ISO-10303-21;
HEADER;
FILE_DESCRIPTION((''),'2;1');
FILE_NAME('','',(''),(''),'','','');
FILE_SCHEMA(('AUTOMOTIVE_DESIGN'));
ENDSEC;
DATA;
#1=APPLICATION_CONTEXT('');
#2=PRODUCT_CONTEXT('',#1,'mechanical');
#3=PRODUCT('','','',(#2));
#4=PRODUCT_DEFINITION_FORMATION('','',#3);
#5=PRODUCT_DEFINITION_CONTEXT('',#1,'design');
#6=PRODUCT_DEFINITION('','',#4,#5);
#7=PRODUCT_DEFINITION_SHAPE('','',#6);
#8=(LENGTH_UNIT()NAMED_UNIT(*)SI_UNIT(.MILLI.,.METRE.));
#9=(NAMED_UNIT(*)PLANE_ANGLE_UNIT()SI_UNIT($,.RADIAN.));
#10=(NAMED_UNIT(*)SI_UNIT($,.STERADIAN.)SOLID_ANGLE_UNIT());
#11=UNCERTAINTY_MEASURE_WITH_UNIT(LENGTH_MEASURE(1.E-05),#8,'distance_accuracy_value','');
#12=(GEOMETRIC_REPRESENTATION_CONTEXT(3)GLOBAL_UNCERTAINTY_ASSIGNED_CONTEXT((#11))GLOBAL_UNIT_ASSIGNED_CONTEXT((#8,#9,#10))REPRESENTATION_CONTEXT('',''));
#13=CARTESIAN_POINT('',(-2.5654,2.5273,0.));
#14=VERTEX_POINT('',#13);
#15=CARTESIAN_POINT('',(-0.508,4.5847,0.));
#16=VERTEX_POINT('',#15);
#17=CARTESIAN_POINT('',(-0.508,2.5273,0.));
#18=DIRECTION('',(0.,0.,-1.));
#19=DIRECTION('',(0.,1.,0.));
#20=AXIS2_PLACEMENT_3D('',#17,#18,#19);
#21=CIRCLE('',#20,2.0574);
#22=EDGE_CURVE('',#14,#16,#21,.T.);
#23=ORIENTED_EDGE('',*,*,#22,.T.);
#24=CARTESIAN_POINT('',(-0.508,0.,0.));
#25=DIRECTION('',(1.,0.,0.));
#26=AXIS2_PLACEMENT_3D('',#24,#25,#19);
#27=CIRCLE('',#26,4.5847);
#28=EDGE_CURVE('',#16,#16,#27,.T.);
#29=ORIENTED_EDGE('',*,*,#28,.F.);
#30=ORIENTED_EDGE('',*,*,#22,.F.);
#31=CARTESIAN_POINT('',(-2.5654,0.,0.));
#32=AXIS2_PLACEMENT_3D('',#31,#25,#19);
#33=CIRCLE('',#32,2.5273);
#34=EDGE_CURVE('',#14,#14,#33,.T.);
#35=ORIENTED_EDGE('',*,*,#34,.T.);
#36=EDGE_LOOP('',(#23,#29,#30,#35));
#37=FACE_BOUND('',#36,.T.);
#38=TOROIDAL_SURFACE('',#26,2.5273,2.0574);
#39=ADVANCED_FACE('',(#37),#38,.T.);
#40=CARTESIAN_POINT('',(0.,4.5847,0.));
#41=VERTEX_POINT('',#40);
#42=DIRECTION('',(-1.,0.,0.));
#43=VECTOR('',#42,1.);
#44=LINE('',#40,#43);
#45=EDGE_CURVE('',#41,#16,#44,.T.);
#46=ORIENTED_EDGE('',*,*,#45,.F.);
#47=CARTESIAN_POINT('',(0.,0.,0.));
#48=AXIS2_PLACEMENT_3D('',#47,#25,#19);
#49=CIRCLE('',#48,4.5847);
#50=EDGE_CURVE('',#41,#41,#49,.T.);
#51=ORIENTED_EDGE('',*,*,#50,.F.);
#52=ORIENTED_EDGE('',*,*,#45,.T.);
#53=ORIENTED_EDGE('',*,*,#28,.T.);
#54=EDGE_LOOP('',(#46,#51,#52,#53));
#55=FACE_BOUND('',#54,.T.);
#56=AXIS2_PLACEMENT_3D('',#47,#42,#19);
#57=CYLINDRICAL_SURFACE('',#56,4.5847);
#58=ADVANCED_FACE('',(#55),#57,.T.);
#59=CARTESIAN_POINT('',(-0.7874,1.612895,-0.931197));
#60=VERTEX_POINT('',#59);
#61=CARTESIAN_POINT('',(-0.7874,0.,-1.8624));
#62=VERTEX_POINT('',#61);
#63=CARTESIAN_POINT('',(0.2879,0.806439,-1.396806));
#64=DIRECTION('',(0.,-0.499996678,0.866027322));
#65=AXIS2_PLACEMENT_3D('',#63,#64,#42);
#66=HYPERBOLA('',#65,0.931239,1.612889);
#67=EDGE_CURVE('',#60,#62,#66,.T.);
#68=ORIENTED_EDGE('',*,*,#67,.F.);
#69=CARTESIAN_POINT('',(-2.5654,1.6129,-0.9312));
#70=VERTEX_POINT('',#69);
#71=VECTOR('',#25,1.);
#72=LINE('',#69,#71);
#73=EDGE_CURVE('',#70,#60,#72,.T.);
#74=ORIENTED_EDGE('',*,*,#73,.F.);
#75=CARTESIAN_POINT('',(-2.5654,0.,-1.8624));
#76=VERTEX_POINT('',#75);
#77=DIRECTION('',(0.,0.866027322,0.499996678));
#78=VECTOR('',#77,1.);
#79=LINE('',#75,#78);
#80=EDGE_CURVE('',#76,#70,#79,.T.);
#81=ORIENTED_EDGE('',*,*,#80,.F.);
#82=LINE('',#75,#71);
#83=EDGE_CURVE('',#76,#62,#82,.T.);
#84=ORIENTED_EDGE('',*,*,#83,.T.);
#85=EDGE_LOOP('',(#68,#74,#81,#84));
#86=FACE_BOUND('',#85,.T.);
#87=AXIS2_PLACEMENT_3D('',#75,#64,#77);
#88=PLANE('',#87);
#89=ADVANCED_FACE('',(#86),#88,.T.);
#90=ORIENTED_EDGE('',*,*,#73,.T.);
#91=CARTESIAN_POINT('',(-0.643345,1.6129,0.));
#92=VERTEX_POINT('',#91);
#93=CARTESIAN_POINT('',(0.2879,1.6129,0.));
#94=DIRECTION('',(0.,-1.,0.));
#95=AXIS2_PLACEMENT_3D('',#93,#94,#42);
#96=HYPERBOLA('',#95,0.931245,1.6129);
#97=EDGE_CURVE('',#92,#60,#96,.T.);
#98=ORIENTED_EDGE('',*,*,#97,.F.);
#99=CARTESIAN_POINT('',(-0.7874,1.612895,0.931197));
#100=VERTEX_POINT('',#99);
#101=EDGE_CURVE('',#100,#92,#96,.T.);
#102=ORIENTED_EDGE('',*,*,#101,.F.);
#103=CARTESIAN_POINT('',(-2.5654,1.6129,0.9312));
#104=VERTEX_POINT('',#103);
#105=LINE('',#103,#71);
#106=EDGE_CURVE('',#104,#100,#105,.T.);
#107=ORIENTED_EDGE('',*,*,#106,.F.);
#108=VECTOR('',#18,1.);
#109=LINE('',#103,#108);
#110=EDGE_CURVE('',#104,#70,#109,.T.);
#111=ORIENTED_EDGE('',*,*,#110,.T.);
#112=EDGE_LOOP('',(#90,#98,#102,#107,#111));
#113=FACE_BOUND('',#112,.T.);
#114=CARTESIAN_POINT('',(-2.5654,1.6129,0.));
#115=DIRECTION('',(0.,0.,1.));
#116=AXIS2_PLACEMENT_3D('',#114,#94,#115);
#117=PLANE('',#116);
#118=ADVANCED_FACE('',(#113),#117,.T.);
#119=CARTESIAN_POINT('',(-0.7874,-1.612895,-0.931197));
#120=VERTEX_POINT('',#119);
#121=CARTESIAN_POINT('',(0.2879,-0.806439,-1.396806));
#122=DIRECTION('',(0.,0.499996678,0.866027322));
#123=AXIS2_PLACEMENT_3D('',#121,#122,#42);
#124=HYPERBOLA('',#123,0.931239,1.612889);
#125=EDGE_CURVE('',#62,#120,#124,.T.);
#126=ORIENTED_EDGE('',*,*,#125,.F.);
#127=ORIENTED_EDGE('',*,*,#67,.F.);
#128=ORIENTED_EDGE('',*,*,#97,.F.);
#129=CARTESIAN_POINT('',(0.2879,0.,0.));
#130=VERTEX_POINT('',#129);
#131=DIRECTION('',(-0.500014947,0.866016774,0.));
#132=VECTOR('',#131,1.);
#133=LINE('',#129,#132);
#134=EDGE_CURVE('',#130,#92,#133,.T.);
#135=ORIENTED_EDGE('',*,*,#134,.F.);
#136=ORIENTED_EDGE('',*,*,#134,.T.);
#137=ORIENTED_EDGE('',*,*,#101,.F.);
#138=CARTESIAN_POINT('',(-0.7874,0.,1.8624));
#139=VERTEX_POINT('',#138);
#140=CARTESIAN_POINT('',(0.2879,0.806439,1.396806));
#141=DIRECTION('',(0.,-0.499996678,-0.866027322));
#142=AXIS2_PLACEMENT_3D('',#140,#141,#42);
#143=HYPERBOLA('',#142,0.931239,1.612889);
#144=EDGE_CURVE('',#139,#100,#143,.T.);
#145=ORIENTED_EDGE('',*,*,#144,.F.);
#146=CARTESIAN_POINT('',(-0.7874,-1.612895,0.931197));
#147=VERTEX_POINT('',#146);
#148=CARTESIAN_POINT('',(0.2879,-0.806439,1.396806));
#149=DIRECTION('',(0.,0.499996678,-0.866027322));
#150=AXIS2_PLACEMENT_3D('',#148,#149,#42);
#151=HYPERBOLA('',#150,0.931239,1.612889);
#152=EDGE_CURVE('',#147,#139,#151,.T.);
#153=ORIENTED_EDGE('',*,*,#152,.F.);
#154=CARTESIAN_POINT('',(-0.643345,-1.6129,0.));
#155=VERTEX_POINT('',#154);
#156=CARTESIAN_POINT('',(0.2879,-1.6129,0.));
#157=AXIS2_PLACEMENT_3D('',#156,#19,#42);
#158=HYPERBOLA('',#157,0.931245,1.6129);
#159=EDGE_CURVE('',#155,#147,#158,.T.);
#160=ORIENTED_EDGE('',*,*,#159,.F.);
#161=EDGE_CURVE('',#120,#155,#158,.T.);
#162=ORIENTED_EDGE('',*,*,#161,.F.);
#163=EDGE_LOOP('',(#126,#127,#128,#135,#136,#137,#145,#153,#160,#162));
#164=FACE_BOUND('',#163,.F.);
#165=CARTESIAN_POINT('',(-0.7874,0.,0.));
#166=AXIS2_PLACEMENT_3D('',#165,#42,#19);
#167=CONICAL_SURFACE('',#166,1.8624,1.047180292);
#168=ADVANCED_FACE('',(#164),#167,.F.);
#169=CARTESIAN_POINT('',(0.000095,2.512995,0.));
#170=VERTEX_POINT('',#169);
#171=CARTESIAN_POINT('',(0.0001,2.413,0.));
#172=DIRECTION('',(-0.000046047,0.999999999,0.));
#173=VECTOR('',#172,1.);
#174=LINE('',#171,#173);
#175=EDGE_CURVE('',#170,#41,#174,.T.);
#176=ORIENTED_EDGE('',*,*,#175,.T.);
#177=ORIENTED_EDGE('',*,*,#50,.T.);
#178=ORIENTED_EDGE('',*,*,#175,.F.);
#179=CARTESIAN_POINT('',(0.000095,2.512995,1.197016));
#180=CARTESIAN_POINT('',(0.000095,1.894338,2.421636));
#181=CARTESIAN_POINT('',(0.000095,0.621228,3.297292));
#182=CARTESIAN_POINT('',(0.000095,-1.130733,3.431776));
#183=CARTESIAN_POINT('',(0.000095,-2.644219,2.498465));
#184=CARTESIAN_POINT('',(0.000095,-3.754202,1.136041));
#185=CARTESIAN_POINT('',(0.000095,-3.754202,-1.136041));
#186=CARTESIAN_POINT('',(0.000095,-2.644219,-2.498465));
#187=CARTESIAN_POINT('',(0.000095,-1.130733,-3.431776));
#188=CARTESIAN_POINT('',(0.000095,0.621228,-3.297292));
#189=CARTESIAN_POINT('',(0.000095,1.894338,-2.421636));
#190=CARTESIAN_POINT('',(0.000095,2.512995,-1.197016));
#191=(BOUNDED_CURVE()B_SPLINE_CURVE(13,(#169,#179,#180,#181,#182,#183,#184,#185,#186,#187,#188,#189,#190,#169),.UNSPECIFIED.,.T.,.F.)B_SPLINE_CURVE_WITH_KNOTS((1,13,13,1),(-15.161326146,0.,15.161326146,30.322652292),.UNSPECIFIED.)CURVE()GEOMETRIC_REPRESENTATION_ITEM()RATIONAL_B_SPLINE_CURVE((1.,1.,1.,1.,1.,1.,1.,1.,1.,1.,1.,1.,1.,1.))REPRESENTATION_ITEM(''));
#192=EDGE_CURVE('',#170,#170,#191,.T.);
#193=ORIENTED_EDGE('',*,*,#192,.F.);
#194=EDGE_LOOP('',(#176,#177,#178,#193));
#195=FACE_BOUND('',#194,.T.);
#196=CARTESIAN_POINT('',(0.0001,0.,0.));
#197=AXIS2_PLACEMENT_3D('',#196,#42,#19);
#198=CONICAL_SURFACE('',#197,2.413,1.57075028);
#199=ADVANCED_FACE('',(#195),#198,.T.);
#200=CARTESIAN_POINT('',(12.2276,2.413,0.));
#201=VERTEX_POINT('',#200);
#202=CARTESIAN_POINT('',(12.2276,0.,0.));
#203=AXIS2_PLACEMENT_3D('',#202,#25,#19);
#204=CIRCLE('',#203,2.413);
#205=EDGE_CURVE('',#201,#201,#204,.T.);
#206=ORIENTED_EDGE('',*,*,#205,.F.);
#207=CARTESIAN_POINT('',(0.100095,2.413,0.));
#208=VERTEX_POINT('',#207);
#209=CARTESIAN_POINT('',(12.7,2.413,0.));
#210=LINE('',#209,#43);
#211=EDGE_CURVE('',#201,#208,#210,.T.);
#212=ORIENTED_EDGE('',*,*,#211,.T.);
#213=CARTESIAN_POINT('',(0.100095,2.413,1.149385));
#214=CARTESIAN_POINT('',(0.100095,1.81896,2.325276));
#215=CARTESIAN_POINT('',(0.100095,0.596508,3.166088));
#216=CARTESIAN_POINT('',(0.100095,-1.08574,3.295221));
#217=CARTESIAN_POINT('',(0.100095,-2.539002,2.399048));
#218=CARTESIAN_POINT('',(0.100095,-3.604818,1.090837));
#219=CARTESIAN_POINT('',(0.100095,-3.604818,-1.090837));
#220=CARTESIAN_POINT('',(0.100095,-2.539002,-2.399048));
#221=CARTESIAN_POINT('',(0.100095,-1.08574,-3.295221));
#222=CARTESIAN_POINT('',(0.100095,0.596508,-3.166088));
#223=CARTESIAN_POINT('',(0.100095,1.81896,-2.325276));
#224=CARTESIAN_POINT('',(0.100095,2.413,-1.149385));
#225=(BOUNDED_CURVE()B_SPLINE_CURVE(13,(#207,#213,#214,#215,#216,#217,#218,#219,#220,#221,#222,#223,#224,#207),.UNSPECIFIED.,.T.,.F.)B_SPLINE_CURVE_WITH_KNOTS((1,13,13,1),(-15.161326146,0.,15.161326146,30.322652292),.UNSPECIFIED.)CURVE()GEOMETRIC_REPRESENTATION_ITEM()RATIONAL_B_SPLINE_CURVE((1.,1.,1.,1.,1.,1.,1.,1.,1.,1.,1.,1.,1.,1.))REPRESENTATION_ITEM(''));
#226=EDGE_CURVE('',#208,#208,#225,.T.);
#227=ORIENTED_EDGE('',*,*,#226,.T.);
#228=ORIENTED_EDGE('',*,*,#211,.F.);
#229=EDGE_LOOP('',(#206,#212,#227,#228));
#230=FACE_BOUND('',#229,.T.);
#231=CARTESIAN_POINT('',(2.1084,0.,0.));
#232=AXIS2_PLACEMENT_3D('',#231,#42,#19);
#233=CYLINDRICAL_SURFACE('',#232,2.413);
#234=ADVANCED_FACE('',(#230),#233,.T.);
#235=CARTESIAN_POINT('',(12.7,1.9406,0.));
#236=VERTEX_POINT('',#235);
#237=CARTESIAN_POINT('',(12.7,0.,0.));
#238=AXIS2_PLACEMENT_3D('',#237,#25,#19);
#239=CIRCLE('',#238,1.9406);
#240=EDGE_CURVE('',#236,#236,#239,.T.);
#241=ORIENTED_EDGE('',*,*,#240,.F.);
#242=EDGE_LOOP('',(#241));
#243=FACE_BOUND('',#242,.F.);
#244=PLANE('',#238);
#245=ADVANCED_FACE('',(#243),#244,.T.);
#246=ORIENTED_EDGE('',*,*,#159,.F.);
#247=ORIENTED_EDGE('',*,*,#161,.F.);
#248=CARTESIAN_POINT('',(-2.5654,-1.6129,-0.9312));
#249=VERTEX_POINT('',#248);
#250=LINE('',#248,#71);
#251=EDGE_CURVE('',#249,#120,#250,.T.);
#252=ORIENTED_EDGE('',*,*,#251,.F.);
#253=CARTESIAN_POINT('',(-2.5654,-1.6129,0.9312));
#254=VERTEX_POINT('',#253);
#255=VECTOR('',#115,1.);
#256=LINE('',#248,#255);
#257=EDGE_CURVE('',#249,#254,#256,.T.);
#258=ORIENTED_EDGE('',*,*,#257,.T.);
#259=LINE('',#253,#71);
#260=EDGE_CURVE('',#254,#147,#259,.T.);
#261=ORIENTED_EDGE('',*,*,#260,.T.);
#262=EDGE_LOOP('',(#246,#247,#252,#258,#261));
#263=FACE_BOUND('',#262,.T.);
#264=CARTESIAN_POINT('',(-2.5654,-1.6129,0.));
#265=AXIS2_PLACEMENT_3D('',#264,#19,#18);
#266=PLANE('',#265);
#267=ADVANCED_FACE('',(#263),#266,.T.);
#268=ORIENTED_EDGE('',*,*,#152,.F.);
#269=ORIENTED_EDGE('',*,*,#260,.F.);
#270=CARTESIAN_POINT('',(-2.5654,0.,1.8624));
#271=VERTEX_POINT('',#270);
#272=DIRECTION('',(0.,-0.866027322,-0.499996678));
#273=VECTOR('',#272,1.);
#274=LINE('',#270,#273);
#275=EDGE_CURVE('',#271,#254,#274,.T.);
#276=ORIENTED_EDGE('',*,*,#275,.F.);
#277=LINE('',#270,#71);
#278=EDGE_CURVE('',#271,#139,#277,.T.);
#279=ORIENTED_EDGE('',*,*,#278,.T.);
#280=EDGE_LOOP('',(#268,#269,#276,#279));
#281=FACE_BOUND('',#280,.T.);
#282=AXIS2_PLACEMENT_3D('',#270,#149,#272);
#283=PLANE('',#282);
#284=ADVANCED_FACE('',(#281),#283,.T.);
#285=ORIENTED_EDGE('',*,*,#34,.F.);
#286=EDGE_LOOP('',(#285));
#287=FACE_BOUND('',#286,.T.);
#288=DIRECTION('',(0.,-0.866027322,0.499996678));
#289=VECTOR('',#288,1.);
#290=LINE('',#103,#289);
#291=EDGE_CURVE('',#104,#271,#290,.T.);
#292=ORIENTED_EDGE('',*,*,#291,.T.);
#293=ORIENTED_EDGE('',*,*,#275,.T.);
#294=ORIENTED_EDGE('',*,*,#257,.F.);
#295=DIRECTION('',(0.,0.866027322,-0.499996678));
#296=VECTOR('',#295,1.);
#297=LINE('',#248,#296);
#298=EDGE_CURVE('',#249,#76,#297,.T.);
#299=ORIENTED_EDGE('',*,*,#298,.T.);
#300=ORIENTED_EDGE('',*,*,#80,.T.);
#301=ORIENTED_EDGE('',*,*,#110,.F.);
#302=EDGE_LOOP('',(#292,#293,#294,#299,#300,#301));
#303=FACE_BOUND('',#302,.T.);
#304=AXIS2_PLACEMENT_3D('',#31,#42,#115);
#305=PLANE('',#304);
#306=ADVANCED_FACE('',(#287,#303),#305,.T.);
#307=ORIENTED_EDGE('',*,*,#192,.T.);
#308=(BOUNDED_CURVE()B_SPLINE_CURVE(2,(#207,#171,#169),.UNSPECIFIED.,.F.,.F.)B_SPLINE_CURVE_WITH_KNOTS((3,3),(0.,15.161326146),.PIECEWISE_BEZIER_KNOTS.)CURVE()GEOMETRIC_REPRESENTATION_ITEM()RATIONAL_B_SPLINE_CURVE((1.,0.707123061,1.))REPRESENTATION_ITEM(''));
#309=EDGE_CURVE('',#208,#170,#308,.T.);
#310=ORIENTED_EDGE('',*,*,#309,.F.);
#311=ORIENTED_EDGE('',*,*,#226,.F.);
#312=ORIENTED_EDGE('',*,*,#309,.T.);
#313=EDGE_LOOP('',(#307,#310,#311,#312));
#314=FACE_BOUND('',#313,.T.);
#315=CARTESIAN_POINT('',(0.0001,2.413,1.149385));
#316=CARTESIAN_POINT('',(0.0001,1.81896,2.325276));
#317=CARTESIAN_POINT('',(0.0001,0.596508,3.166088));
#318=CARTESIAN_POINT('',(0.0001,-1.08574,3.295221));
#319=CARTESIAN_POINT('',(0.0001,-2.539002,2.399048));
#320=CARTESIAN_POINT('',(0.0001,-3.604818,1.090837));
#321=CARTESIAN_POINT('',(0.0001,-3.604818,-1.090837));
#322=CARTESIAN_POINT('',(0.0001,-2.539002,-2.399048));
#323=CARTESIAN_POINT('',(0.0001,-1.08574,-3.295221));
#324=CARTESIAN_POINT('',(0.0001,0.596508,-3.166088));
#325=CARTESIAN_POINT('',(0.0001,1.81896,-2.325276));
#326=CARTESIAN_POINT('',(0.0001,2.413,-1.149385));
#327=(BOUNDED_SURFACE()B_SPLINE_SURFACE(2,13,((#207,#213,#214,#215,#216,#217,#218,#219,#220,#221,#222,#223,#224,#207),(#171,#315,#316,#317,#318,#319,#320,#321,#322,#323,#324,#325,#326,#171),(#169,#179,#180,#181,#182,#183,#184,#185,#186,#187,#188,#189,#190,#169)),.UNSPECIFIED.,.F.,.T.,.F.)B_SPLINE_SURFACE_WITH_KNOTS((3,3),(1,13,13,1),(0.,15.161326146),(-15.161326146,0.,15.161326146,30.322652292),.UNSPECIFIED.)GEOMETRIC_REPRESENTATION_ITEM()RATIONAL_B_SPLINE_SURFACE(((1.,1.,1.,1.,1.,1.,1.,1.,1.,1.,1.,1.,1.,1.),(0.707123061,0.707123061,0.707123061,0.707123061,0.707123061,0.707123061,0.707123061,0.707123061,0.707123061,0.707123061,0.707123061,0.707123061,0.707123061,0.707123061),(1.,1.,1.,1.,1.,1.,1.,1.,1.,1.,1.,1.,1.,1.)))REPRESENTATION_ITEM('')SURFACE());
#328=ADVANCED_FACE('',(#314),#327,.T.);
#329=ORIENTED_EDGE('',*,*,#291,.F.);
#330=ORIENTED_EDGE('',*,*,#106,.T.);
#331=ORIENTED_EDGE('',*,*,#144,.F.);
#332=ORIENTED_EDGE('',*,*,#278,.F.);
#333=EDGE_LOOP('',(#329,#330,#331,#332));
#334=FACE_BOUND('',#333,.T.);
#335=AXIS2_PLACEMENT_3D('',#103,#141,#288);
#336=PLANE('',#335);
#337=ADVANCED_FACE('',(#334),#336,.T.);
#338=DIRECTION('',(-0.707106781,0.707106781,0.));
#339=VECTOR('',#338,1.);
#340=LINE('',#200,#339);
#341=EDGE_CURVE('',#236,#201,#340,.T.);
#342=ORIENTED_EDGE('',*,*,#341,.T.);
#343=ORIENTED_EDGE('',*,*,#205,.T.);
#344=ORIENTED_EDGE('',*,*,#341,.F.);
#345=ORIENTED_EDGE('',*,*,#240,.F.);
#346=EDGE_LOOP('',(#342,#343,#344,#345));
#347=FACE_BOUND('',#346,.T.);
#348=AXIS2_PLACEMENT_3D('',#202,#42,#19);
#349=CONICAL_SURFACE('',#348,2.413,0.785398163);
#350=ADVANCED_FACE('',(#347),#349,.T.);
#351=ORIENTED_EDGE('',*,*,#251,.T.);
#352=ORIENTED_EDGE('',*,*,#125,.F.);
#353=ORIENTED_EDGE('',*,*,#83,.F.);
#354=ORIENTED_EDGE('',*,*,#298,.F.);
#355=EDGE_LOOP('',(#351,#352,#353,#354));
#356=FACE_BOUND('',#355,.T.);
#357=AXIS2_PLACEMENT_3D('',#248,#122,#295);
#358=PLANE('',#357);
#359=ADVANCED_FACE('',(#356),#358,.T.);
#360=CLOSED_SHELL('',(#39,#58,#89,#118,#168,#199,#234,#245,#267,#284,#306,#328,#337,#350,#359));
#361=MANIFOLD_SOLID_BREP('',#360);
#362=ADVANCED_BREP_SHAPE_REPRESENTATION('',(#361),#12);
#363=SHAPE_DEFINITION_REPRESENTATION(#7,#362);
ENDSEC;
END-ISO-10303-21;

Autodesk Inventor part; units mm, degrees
ref_plane "YZ Plane" through (0, 0, 0) normal (1, 0, 0) x (0, 1, 0)
ref_plane "XZ Plane" through (0, 0, 0) normal (0, 1, 0) x (-1, 0, 0)
sketch "Sketch1" plane through (0, 0, 0) normal (0, 0, 1) x (1, 0, 0)
  line L0 (0.2879, 0) -> (12.7, 0)
  line L1 (12.7, 0) -> (12.7, 2.413)
  line L2 (12.7, 2.413) -> (2.1084, 2.413)
  line L3 (2.1084, 2.413) -> (0.0001, 2.413)
  line L4 (0.0001, 2.413) -> (0, 2.413)
  line L5 (0, 2.413) -> (0, 4.5847)
  line L6 (0, 4.5847) -> (-2.5654, 4.5847)
  line L7 (-2.5654, 4.5847) -> (-2.5654, 1.8624)
  line L8 (-2.5654, 1.8624) -> (-0.7874, 1.8624)
  line L9 (-0.7874, 1.8624) -> (0.2879, 0)
  line L10 (-5.6185, 0) -> (15.7531, 0) projected
  line L11 (0, -0.9169) -> (0, 5.5016) projected
  line L12 (2.1084, 2.413) -> (0, 2.413) construction
  dimension "d1" = 10.5916
  dimension "d2" = 2.1083
  dimension "d3" = 2.5654
  dimension "d4" = 1.778
  dimension "d5" = 60
  dimension "d6" = 4.826
  dimension "d7" = 4.826
  dimension "d8" = 3.7248
  dimension "d9" = 9.1694
  dimension "d26" = 12.7
revolve "Body" add sketch "Sketch1" angle 360 about axis through (0.2879, 0, 0) along (1, 0, 0) contours L9 L11 L3 L2 L1 L0 | L9 L8 L7 L6 L5 L11
sketch "Sketch2" plane through (-2.5654, 0, 0) normal (-1, 0, 0) x (0, 0, 1)
  circle A0 centre (0, 0) radius 1.8624 projected
  line L0 (0, -6.4186) -> (0, 6.4186) projected
  line L1 (-6.4186, 0) -> (6.4186, 0) projected
  line L2 (1.8624, 0) -> (0.9312, -1.6129)
  line L3 (0.9312, -1.6129) -> (-0.9312, -1.6129)
  line L4 (-0.9312, -1.6129) -> (-1.8624, 0)
  line L5 (-1.8624, 0) -> (-0.9312, 1.6129)
  line L6 (-0.9312, 1.6129) -> (0.9312, 1.6129)
  line L7 (0.9312, 1.6129) -> (1.8624, 0)
extrude "Slot" add sketch "Sketch2" against normal up to next contours L7 A0 | A0 L2 | L6 L0 A0 | A0 L0 L3 | L0 L6 A0 | A0 L3 L0 | L4 A0 | A0 L5
fillet "Fillet1" radius 2.0574 1 edges at (-2.5654, -4.5847, 0)
thread "Thread" size "10-32 UNF" class "2A" standard "ANSI Unified Screw Threads" length 10.5916
chamfer "Chamfer1" distance 0.4724 distance2 0.4724 1 edges at (12.7, -2.413, 0) measured on face at (12.7, -0.2852, -0.7521)
ref_plane "Work Plane1" through (29, 0, 0) normal (0, -1, 0) x (1, 0, 0)
fillet "Fillet2" radius 0.1 1 edges at (0.0001, -2.413, 0)
equation "\"d30\" = R"
equation "\"d17\" = RR"
equation "\"d13\" = GEL"
equation "\"d15\" = -0.5 * SPD + 0.5 * GD"
equation "\"d16\" = GUL"
equation "\"d1\" = GEL"
equation "\"d3\" = KOH"
equation "\"d4\" = INTI"
equation "\"d6\" = GD"
equation "\"d7\" = BDM"
equation "\"d8\" = 1.1547 * SW"
equation "\"d9\" = KOD"
equation "\"d26\" = NLG"
equation "\"GD\" = NND"
equation "\"NLG\" = 12.7"
equation "\"GEL\" = 10.5916"
equation "\"KOD\" = 9.1694"
equation "\"KOH\" = 2.5654"
equation "\"INTI\" = 1.778"
equation "\"GAL\" = 2.1082"
equation "\"GUL\" = 0.47244"
equation "\"BDM\" = NND"
equation "\"SW\" = 3.2258"
equation "\"RR\" = 2.0574"
equation "\"SPD\" = 3.88112"
equation "\"R\" = 0.1"
equation "\"TOA\" = 30deg"
equation "\"GD1\" = SPD"
equation "\"THREADDIA\" = 4.826"
equation "\"KOH1\" = 0.508"
equation "\"NND\" = 4.826"
equation "\"E0\" = 3.72593"
properties part number "ANSI B18.3 - No. 10-32 - 1/2, HSBHCSI" material "Steel, Mild"
